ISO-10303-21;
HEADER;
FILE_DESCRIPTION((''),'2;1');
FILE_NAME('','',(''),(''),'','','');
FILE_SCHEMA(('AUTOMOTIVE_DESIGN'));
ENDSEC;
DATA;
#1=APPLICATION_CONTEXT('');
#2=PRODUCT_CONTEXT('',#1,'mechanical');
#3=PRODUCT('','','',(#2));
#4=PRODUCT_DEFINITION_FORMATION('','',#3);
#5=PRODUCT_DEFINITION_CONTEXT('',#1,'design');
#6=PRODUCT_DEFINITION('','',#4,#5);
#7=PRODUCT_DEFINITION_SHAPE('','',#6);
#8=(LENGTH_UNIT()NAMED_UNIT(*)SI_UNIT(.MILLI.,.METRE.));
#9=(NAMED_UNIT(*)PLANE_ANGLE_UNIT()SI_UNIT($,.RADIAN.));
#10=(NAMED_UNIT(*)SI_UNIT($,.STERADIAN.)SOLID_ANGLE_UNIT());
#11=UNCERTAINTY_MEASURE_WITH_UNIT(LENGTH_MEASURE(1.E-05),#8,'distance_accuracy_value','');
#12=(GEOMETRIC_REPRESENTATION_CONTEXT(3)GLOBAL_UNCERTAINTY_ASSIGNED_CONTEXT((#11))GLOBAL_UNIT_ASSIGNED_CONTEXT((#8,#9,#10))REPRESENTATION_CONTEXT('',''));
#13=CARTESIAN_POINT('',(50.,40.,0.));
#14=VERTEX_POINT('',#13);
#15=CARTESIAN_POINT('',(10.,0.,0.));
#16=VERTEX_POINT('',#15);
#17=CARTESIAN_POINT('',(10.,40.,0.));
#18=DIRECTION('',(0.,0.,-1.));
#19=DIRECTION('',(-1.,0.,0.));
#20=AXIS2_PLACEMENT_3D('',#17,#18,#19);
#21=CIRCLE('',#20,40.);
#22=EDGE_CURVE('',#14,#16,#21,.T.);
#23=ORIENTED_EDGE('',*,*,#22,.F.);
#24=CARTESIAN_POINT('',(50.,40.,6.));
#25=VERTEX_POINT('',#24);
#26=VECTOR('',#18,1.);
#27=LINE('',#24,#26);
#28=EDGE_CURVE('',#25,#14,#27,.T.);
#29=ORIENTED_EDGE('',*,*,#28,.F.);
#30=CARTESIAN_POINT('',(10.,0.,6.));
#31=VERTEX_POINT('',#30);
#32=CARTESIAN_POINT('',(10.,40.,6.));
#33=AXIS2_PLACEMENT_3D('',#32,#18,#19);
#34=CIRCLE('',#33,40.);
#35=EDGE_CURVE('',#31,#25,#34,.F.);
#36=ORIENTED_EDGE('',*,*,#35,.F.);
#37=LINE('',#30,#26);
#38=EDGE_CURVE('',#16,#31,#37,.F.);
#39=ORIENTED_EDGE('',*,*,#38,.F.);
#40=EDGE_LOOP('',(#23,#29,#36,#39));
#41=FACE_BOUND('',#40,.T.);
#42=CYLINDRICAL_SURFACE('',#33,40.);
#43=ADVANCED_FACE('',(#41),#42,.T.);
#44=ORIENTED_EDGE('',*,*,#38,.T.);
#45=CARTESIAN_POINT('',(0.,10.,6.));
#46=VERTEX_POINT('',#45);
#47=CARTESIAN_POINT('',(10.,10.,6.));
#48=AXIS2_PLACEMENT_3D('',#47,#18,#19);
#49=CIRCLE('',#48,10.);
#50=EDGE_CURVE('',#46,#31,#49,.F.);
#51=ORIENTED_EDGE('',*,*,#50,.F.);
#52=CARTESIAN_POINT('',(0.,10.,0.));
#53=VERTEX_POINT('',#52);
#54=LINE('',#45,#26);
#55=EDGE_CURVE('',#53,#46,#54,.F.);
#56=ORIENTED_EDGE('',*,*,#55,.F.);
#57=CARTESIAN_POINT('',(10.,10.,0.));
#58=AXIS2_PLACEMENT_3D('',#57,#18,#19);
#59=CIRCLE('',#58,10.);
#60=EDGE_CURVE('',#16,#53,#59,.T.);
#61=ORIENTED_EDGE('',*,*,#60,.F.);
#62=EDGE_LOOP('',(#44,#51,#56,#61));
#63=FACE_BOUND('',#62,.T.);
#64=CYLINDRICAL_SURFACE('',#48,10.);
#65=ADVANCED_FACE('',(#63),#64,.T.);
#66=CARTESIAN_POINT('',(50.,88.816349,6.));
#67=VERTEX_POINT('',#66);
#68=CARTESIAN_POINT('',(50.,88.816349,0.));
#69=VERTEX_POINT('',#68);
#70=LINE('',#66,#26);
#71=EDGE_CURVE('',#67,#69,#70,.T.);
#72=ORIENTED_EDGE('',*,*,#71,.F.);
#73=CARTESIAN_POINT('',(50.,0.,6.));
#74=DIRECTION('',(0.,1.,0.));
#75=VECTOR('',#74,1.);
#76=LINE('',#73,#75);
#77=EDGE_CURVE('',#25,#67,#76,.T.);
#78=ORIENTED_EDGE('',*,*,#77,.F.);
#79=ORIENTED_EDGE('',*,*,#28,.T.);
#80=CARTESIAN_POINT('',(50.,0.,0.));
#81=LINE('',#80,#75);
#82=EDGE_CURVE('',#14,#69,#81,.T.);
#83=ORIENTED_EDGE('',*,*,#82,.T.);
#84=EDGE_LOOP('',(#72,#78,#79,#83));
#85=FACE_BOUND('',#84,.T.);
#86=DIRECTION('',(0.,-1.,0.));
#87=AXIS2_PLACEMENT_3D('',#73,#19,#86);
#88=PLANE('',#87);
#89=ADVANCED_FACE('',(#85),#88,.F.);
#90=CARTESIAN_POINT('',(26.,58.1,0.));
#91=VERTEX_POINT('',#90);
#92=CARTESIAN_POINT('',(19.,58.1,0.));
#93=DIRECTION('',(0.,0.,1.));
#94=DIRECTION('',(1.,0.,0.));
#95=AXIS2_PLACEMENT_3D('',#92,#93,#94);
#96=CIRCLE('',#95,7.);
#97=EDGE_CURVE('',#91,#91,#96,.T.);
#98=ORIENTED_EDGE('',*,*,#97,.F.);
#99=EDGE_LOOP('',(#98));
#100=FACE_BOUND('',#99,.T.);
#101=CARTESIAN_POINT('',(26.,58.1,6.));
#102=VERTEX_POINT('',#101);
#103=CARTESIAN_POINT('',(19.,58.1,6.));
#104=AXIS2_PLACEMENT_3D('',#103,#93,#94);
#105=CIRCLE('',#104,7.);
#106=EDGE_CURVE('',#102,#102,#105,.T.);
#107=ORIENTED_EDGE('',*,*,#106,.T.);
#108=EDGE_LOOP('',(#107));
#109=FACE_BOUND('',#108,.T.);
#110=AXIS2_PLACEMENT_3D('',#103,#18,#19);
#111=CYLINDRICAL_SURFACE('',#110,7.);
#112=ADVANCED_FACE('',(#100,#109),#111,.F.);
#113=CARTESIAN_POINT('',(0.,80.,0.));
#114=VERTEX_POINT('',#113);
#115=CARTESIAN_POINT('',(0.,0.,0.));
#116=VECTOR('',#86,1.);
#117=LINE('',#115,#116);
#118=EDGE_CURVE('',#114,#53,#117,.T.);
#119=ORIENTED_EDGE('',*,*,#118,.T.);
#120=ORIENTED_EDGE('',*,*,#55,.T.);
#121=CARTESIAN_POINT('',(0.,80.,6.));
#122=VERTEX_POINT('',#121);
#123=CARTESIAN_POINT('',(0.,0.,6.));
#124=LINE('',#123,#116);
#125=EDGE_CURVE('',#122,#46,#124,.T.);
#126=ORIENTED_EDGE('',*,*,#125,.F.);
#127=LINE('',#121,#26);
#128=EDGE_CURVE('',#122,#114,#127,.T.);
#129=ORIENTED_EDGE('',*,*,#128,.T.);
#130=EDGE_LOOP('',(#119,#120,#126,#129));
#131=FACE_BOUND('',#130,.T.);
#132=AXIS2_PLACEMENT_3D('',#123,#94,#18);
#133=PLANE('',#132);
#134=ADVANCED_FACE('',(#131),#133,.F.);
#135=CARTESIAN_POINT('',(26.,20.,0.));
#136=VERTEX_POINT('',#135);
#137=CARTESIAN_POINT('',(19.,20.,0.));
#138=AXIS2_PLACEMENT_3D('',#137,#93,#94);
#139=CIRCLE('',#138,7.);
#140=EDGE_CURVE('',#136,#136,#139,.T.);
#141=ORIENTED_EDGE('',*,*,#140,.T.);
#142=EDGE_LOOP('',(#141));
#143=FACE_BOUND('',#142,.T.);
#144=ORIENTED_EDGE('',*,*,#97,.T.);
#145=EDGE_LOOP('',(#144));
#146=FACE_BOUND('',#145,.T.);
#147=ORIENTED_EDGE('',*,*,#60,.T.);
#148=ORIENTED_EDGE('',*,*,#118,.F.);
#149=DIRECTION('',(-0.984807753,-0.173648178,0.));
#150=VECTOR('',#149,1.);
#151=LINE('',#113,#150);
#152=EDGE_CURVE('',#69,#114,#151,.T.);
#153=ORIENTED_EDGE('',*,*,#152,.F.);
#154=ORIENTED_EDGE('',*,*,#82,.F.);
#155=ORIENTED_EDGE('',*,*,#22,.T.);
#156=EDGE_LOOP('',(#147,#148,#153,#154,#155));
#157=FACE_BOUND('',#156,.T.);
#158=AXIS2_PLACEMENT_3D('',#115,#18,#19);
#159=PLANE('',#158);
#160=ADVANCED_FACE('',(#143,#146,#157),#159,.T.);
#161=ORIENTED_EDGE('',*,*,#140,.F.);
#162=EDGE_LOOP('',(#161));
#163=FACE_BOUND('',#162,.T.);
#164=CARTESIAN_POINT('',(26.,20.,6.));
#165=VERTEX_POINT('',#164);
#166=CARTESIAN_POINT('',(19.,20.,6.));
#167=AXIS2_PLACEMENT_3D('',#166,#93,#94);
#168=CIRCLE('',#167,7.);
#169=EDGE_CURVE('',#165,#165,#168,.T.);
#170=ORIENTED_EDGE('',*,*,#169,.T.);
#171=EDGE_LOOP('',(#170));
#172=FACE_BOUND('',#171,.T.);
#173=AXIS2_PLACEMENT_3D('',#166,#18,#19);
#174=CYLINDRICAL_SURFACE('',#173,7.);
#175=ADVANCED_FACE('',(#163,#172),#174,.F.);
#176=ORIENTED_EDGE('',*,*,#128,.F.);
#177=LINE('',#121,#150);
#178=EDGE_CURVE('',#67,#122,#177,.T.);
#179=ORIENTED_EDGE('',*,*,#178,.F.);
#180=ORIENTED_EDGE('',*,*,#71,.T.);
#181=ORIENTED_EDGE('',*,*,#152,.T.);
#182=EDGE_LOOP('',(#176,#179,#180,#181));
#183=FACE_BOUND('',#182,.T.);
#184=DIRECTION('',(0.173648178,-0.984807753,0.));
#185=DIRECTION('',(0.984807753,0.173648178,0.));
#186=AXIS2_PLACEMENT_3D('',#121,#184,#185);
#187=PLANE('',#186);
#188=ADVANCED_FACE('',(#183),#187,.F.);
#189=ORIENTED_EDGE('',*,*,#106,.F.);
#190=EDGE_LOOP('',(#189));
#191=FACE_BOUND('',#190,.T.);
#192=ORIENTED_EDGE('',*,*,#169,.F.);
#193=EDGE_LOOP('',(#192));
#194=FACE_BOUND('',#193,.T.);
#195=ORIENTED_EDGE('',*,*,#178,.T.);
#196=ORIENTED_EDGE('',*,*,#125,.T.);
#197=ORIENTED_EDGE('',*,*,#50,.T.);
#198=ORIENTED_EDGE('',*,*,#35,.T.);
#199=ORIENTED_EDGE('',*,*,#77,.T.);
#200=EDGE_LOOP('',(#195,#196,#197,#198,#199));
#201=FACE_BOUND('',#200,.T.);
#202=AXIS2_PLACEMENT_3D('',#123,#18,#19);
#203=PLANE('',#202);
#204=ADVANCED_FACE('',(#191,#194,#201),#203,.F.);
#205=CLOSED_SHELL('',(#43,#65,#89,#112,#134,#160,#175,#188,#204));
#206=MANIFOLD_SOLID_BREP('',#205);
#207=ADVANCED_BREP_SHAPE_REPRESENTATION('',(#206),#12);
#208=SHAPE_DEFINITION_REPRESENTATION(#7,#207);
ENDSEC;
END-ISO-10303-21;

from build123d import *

# Parameters (mm, degrees)
EXTRUDE_1_DEPTH     = 6
SKETCH_2_R          = 7
CUT_EXTRUDE_1_DEPTH = 103.099676082
FILLET_2_R          = 40
FILLET_3_R          = 10


with BuildPart() as part:
    # Эскиз1 → Бобышка-Вытянуть1 (new body)
    with BuildSketch(Plane.XY):
        Polygon((0, 0), (0, 80), (50, 88.816349035), (50, 0), align=None)
    extrude(amount=EXTRUDE_1_DEPTH)

    # Эскиз2 → Вырез-Вытянуть1 (cut, through all)
    with BuildSketch(Plane.XY):
        with Locations((19, 58.1)):
            Circle(SKETCH_2_R)
        with Locations((19, 20)):
            Circle(SKETCH_2_R)
    extrude(amount=CUT_EXTRUDE_1_DEPTH, mode=Mode.SUBTRACT)

    # Скругление2
    fillet_2_edges = [part.edges().sort_by_distance(p)[0] for p in [
        (50, 0, 3),
    ]]
    fillet(fillet_2_edges, radius=FILLET_2_R)

    # Скругление3
    fillet_3_edges = [part.edges().sort_by_distance(p)[0] for p in [
        (0, 0, 3),
    ]]
    fillet(fillet_3_edges, radius=FILLET_3_R - 0.0001)  # a hair under: the kernel refuses the full size


solid = part.part
